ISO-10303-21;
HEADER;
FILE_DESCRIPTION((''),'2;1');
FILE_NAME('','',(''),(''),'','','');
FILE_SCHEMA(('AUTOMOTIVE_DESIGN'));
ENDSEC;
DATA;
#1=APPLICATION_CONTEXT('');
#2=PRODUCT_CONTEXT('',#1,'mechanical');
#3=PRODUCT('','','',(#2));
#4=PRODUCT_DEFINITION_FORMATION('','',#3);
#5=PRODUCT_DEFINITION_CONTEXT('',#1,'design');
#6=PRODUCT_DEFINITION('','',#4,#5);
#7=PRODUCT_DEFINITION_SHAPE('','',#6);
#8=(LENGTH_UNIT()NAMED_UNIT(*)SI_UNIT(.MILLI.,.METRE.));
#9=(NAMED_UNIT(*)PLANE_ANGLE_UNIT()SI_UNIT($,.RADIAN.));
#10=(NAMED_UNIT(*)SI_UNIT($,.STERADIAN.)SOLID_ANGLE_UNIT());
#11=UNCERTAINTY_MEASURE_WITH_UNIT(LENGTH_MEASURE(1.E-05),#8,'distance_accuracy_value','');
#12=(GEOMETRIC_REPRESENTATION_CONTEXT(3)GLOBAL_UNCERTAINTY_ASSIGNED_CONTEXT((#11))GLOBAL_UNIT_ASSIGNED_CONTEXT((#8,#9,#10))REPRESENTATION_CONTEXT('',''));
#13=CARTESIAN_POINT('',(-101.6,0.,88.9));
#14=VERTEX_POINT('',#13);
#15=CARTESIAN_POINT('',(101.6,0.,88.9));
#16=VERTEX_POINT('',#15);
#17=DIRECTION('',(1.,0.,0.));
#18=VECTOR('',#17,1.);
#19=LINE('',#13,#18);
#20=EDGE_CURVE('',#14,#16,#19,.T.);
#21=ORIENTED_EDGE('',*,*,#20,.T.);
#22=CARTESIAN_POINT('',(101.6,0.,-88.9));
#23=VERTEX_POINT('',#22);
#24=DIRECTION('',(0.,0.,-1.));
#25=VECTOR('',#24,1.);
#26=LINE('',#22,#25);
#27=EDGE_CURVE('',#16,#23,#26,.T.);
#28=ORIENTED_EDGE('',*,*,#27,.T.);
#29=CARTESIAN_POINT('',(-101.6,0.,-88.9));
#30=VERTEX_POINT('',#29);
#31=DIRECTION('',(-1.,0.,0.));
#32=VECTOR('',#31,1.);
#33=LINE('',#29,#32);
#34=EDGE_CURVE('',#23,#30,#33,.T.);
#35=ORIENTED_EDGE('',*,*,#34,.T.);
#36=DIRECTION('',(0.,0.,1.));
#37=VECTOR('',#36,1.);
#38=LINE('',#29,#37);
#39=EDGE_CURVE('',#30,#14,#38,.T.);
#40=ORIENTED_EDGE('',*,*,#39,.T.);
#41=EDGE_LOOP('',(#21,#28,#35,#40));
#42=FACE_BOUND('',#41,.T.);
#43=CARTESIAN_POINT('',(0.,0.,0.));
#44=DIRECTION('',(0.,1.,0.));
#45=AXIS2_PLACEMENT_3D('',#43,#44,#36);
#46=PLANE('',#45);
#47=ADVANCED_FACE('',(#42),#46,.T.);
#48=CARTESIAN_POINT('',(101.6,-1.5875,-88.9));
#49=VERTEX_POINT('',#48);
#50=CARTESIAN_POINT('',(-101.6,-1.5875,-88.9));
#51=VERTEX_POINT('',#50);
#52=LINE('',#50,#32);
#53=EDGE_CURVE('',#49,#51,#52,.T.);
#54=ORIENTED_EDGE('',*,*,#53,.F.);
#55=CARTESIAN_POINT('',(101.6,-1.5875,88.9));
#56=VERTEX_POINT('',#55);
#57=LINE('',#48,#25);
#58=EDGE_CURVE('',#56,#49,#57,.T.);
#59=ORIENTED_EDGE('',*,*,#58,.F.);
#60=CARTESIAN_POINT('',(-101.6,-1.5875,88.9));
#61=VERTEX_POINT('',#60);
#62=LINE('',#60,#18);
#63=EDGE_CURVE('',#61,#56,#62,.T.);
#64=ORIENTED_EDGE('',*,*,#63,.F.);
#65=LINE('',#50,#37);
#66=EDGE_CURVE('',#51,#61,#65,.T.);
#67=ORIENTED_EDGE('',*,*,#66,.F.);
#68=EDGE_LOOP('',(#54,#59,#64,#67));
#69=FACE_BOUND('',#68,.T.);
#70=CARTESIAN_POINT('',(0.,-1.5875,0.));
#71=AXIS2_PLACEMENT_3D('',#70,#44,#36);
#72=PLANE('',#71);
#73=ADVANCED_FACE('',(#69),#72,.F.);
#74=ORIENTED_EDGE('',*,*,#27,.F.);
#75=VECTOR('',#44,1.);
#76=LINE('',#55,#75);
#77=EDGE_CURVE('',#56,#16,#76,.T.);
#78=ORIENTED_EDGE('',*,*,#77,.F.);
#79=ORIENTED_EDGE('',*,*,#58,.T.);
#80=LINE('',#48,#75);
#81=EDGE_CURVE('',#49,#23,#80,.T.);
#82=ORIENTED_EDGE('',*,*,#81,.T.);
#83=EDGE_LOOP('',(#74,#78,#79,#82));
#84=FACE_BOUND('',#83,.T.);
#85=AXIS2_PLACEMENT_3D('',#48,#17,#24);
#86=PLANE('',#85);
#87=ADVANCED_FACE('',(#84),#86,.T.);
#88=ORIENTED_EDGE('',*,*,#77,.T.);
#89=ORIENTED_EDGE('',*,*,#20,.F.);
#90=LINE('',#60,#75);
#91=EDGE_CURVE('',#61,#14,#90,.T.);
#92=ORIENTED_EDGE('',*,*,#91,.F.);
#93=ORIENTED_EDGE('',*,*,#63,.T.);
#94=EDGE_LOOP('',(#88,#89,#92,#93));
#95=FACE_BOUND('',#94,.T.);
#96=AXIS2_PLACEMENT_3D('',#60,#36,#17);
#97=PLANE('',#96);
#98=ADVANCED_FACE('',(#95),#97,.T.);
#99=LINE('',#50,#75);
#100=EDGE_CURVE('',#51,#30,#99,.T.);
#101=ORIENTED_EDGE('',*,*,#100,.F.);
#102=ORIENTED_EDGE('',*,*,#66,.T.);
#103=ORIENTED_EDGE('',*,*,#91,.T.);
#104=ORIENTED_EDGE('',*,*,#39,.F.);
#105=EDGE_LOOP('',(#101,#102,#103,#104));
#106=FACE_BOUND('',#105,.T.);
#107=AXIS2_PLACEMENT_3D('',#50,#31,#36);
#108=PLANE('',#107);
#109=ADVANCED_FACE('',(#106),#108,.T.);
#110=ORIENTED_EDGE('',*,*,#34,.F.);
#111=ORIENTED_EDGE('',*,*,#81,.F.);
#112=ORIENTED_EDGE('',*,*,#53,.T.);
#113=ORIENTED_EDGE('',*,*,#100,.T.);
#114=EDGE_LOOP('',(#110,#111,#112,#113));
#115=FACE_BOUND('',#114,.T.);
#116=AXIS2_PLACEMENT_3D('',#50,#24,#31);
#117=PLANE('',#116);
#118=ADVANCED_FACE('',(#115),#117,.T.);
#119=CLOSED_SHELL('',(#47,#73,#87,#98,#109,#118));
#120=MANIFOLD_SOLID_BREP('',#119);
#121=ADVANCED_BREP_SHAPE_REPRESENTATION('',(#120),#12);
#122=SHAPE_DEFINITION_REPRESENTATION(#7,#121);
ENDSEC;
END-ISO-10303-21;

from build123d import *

# Parameters (mm, degrees)
SKETCH1_W          = 203.2
SKETCH1_H          = 177.8
BASE_FLANGE1_DEPTH = 1.5875


# Sheet-metal steps are written as plain solids
with BuildPart() as part:
    # Sketch1 → Base-Flange1 (new body)
    with BuildSketch(Plane(origin=(0, 0, 0), x_dir=(1, 0, 0), z_dir=(0, 1, 0))):
        Rectangle(SKETCH1_W, SKETCH1_H)
    extrude(amount=-BASE_FLANGE1_DEPTH)


solid = part.part
